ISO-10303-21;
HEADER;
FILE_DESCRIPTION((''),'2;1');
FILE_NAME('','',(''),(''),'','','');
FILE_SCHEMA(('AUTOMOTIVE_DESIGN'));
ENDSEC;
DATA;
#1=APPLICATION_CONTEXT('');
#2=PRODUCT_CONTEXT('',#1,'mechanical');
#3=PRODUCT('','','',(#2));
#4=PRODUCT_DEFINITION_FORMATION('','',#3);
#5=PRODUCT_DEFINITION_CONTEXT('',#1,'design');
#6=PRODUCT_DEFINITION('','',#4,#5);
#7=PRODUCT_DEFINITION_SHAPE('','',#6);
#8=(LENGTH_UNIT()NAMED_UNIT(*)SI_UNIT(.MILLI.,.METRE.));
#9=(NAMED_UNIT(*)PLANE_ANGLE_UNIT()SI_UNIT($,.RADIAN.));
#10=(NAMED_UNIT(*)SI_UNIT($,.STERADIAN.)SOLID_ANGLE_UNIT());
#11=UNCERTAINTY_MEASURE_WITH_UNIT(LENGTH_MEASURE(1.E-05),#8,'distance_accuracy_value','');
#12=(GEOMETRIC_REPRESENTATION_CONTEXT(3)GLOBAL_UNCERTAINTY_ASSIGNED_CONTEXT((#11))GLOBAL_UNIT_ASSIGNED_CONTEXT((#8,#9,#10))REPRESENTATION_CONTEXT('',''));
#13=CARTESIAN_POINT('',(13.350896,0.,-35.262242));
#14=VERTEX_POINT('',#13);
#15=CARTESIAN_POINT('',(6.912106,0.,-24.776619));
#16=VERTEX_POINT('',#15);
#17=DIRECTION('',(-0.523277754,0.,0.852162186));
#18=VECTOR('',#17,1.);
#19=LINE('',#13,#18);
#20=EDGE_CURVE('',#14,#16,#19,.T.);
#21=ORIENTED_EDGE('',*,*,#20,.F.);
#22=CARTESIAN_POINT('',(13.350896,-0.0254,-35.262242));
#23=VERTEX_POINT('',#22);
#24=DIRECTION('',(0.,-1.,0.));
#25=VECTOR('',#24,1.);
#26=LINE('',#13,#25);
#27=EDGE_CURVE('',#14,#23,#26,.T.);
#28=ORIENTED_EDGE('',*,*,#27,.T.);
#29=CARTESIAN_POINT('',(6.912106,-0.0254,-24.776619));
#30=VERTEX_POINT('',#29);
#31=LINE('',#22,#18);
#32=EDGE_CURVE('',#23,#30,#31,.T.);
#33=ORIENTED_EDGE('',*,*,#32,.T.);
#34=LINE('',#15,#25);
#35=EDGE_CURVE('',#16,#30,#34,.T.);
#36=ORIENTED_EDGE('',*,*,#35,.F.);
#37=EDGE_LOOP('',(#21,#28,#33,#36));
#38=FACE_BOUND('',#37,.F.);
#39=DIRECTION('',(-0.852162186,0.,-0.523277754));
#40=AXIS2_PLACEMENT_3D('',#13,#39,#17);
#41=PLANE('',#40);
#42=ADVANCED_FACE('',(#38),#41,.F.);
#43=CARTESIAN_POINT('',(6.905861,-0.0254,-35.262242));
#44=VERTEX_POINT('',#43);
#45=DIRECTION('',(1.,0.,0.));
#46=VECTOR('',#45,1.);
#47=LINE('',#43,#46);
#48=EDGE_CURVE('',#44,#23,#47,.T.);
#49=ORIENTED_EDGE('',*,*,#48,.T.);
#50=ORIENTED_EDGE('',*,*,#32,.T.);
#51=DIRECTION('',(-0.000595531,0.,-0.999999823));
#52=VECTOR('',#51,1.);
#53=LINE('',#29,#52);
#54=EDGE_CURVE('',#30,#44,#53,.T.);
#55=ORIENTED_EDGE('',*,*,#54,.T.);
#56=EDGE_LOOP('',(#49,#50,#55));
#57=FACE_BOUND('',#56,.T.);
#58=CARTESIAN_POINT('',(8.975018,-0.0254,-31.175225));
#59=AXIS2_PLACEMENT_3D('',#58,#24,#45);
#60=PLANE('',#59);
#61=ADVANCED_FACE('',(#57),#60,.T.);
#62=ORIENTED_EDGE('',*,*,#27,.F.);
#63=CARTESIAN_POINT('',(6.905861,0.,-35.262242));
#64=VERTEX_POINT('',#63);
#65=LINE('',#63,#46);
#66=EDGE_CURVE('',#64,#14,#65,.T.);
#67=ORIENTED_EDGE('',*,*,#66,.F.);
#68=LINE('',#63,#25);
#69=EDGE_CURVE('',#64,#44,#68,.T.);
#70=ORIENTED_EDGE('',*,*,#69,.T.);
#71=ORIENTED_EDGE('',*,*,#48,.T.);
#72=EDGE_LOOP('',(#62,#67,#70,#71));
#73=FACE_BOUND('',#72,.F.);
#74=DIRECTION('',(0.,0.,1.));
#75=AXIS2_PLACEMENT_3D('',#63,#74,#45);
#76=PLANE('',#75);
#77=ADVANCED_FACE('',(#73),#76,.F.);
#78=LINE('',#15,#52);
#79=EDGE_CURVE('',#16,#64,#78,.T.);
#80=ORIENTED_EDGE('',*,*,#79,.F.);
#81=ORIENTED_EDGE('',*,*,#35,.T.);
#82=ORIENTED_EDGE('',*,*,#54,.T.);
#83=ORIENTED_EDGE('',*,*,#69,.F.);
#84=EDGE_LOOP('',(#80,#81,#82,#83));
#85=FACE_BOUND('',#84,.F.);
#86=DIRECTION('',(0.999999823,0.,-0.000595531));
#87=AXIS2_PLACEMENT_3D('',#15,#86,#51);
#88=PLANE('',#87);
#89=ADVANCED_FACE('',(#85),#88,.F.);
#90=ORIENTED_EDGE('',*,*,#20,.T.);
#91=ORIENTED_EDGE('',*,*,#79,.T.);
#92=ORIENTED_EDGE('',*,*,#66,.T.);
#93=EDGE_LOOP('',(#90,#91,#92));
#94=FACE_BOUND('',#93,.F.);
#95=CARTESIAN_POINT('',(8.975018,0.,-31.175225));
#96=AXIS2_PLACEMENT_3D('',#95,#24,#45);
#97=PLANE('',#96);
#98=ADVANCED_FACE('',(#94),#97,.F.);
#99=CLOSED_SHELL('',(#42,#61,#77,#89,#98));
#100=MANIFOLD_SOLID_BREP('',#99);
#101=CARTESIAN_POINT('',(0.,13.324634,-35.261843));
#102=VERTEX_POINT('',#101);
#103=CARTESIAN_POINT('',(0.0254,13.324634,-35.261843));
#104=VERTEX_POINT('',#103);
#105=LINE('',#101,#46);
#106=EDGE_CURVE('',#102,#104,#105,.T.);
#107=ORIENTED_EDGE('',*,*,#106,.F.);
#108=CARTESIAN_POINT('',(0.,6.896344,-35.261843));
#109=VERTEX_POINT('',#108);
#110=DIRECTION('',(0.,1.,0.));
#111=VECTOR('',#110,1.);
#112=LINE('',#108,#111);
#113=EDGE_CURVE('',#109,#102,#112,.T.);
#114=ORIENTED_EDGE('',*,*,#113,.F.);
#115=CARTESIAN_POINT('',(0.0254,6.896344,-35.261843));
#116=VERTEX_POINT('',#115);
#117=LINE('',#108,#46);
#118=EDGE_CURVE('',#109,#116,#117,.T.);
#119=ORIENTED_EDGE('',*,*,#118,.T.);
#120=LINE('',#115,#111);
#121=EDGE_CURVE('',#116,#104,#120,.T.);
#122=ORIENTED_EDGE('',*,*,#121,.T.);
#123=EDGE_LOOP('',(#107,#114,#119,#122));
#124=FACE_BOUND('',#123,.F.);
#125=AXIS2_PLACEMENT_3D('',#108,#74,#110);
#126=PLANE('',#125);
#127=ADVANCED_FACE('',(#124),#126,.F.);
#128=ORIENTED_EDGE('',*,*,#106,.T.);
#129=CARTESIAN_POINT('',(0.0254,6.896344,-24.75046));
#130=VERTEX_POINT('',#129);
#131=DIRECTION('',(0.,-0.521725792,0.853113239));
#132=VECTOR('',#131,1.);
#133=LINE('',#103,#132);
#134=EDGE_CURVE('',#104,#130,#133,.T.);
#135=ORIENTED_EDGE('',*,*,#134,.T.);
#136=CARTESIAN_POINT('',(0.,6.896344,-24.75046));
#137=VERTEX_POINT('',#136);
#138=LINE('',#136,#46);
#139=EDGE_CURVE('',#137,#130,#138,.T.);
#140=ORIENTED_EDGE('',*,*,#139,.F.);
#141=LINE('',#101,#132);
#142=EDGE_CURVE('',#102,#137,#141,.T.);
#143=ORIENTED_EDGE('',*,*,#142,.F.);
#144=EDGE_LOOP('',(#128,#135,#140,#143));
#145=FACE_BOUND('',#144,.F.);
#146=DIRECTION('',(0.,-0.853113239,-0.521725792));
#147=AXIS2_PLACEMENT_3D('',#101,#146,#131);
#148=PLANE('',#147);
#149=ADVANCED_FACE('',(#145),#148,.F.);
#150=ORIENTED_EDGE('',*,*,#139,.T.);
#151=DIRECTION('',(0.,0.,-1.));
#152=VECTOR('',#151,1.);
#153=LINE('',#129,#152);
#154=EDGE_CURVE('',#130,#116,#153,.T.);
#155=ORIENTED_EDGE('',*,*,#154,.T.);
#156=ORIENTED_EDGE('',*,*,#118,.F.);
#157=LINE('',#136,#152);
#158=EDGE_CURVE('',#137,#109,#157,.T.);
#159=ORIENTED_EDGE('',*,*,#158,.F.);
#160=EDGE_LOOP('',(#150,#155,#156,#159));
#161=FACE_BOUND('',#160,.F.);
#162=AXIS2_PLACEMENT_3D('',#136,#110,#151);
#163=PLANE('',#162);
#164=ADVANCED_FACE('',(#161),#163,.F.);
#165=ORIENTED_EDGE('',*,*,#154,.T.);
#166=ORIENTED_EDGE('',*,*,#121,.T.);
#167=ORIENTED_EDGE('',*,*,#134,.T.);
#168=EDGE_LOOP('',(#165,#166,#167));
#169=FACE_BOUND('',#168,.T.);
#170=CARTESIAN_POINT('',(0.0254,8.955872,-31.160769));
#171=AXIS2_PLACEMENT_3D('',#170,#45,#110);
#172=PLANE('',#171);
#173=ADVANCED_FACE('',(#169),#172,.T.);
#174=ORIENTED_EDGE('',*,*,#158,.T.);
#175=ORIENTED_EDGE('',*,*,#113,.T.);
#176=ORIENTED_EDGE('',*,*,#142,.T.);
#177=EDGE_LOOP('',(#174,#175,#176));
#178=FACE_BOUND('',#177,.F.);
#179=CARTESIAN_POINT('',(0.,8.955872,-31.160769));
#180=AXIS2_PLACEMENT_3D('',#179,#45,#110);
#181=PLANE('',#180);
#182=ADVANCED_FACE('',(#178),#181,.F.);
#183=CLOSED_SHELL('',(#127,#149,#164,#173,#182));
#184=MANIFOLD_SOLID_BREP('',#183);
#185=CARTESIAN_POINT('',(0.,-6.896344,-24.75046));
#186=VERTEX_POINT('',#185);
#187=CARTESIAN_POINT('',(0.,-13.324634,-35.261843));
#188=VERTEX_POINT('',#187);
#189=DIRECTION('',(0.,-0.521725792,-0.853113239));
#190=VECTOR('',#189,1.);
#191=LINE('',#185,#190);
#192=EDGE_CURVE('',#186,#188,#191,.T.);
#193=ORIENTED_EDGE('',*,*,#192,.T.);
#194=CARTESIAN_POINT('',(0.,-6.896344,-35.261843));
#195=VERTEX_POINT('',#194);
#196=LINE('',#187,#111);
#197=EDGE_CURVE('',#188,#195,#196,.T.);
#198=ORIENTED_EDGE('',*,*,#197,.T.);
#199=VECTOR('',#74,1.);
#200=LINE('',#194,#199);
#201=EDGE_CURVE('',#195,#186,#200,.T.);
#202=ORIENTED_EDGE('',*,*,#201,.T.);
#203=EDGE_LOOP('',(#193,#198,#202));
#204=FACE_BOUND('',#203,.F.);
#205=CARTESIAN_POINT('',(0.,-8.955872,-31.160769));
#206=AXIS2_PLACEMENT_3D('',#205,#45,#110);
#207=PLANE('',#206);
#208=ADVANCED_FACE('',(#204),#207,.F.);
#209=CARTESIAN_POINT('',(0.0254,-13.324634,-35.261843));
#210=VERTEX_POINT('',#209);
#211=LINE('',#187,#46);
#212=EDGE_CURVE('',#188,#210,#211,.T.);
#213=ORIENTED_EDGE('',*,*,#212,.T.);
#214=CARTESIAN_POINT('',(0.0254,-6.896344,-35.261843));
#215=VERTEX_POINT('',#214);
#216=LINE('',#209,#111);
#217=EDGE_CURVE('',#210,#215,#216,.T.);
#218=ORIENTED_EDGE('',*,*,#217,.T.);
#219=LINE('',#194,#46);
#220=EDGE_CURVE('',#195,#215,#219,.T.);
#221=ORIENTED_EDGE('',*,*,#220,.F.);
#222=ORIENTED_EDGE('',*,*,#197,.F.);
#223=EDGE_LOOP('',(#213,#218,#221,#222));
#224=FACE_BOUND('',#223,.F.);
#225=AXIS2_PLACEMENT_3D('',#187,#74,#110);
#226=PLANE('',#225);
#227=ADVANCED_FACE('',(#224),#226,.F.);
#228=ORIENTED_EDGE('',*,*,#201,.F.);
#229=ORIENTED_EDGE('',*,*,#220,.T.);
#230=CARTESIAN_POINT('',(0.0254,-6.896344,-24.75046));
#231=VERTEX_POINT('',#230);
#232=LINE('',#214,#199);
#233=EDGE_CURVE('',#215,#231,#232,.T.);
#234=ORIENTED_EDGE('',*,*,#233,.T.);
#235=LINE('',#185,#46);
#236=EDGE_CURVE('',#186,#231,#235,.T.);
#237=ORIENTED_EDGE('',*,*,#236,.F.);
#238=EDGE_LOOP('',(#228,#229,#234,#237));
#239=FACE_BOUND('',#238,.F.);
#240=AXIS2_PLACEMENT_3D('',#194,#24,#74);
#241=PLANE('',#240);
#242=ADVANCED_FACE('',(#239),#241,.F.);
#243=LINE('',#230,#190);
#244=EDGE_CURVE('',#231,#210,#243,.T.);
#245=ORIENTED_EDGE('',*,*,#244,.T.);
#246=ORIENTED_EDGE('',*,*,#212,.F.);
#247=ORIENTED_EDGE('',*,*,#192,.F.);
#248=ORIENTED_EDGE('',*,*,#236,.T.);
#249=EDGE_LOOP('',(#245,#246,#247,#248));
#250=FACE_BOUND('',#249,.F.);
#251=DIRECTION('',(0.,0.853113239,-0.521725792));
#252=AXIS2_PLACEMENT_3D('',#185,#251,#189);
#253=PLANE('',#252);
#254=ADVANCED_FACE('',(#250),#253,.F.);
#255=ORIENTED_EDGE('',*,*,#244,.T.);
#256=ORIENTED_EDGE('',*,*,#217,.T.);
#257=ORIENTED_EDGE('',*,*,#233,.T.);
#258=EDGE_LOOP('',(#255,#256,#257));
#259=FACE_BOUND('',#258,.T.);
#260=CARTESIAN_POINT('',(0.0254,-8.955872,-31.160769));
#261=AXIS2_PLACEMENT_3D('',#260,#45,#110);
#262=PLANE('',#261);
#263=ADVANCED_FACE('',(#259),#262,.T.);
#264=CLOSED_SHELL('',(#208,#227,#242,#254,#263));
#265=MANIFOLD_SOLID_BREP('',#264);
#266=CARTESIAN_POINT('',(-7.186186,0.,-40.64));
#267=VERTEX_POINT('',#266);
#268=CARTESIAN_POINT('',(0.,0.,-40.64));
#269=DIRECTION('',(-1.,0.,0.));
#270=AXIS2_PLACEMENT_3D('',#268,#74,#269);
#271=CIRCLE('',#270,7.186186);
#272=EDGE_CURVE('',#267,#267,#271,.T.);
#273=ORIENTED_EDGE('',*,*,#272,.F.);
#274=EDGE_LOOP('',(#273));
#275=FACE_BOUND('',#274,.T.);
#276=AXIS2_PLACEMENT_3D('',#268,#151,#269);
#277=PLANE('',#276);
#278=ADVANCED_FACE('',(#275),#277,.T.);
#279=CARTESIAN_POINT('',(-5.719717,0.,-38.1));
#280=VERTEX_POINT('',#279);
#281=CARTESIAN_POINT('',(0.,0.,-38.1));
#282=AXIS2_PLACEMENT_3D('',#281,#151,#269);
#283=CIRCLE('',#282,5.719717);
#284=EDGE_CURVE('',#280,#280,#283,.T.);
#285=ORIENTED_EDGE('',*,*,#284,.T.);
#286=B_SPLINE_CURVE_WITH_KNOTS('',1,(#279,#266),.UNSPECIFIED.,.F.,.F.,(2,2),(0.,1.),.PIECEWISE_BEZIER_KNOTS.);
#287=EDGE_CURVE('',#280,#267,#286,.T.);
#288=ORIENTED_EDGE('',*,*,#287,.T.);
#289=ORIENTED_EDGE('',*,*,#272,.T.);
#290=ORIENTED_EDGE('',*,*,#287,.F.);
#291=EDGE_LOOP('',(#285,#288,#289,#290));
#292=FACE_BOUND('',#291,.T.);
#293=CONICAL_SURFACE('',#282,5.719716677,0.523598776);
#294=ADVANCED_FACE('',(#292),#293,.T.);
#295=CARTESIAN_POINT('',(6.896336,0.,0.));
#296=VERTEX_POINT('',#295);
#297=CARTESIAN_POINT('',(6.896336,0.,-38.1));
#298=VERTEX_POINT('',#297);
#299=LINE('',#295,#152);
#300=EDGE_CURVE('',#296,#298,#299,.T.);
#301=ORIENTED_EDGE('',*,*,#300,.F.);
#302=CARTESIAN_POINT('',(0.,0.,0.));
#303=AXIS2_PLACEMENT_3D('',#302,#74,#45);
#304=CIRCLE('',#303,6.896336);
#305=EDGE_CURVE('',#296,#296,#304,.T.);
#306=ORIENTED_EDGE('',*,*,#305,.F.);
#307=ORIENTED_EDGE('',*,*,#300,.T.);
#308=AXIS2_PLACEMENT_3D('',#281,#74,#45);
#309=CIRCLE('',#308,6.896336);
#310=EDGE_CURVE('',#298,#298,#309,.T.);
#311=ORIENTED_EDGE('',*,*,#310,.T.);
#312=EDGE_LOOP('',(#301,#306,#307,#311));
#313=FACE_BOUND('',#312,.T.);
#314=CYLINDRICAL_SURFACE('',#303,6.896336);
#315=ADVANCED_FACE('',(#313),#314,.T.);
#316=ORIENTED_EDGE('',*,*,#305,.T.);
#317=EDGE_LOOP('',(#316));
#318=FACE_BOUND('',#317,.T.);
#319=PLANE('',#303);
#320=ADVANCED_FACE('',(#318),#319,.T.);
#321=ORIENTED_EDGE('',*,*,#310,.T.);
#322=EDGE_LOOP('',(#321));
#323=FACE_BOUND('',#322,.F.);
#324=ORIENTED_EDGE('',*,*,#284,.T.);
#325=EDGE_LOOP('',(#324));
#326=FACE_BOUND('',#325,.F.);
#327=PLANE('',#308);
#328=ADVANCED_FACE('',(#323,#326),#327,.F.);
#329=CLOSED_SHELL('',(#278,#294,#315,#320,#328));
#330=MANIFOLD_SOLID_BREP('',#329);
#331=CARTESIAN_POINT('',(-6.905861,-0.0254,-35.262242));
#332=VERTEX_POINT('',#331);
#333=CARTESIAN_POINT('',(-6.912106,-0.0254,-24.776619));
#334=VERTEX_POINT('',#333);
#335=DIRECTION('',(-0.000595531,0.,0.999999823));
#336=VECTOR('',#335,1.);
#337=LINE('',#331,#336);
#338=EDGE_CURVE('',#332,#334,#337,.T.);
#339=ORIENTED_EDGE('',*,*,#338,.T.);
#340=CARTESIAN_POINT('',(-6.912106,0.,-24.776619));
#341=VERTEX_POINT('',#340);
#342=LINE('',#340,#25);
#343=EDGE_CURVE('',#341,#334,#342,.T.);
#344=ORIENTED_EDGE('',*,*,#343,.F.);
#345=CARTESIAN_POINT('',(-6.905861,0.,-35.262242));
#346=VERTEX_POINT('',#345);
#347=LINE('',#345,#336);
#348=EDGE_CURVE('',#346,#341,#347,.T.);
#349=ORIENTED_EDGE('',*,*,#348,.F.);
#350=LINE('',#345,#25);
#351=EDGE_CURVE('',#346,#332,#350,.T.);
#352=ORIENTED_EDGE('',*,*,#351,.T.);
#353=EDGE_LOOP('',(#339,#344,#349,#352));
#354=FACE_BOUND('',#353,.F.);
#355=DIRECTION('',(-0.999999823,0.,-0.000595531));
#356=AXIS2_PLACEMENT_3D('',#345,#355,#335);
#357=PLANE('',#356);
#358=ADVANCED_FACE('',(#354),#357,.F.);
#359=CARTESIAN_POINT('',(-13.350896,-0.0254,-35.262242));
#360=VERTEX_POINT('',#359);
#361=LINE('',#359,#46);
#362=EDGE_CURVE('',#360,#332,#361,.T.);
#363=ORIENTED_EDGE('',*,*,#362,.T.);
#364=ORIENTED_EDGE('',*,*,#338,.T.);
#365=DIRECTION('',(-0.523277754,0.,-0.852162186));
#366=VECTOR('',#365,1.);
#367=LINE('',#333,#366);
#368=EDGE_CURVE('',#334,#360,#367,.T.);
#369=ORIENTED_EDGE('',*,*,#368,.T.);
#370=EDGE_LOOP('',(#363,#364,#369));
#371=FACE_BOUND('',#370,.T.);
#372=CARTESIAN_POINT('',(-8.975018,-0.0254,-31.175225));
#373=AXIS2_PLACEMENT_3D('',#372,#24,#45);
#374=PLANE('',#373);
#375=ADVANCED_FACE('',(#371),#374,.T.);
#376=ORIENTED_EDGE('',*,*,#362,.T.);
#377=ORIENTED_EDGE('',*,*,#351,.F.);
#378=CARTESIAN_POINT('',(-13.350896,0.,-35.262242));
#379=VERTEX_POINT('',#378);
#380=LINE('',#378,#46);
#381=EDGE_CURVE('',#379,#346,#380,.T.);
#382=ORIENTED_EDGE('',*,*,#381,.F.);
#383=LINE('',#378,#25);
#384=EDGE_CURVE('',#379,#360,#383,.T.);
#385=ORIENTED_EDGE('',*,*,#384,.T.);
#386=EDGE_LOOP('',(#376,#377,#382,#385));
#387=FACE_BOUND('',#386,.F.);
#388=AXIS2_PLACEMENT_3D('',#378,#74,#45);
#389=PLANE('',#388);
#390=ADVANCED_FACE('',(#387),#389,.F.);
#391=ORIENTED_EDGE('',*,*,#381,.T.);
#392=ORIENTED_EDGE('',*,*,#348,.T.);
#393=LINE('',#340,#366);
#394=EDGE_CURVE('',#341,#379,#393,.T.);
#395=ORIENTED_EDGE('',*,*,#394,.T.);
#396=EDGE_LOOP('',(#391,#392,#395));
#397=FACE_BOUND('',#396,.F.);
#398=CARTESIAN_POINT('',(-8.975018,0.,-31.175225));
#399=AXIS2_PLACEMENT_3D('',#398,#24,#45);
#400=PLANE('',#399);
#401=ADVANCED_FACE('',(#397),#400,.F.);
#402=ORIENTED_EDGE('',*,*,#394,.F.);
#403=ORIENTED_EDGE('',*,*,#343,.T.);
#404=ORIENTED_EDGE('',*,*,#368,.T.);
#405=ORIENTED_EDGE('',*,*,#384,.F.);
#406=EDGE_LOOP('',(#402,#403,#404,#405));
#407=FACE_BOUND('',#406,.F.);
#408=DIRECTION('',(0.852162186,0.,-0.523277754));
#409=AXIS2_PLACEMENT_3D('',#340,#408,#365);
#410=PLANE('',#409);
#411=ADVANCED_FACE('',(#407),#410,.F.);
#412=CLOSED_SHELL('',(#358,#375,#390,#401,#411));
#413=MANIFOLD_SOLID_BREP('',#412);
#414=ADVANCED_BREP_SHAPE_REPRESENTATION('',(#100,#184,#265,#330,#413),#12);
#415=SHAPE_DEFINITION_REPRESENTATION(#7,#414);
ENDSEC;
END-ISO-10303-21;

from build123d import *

# Parameters (mm, degrees)
F0_R     = 6.8963363522
F1_DEPTH = 38.1
F3_DEPTH = 2.54
F3_TAPER = -30
F5_DEPTH = 0.0254
F7_DEPTH = 0.0254


# Not quite as in the source:
# - the program builds the solid bodies; features that only make, move or delete a surface that nothing else refers to are left out


with BuildPart() as f1:
    # F0 (on Top) → F1 (new body)
    with BuildSketch(Plane.XY):
        Circle(F0_R)
    extrude(amount=-F1_DEPTH)

    # F2 (on face) → F3 (join)
    with BuildSketch(Plane(origin=(0, 0, -38.1), x_dir=(1, 0, 0), z_dir=(0, 0, -1))):
        with BuildLine():
            Line((-5.7197166772, 0), (5.7197166772, 0))
            ThreePointArc((5.7197166772, 0), (0, 5.7197166772), (-5.7197166772, 0))
        make_face()
        with BuildLine():
            ThreePointArc((-5.7197166772, 0), (0, -5.7197166772), (5.7197166772, 0))
            Line((5.7197166772, 0), (-5.7197166772, 0))
        make_face()
    extrude(amount=F3_DEPTH, taper=F3_TAPER)


with BuildPart() as f5:
    # F4 (on Front) → F5 (new body)
    with BuildSketch(Plane.XZ):
        Polygon((13.350895606, -35.2622419596), (6.9121057168, -24.7766189277), (6.9058611989, -35.2622419596), align=None)
    extrude(amount=F5_DEPTH)


with BuildPart() as f5b:
    # F4 (on Front) → F5, piece 2 (new body)
    with BuildSketch(Plane.XZ):
        Polygon((-13.350895606, -35.2622419596), (-6.9058611989, -35.2622419596), (-6.9121057168, -24.7766189277), align=None)
    extrude(amount=F5_DEPTH)


with BuildPart() as f7:
    # F6 (on Right) → F7 (new body)
    with BuildSketch(Plane.YZ):
        Polygon((6.8963435479, -24.7504599392), (6.8963435479, -35.2618433535), (13.324634172, -35.2618433535), align=None)
    extrude(amount=F7_DEPTH)


with BuildPart() as f7b:
    # F6 (on Right) → F7, piece 2 (new body)
    with BuildSketch(Plane.YZ):
        Polygon((-13.324634172, -35.2618433535), (-6.8963435479, -35.2618433535), (-6.8963435479, -24.7504599392), align=None)
    extrude(amount=F7_DEPTH)


solid = Compound([f1.part, f5.part, f5b.part, f7.part, f7b.part])
